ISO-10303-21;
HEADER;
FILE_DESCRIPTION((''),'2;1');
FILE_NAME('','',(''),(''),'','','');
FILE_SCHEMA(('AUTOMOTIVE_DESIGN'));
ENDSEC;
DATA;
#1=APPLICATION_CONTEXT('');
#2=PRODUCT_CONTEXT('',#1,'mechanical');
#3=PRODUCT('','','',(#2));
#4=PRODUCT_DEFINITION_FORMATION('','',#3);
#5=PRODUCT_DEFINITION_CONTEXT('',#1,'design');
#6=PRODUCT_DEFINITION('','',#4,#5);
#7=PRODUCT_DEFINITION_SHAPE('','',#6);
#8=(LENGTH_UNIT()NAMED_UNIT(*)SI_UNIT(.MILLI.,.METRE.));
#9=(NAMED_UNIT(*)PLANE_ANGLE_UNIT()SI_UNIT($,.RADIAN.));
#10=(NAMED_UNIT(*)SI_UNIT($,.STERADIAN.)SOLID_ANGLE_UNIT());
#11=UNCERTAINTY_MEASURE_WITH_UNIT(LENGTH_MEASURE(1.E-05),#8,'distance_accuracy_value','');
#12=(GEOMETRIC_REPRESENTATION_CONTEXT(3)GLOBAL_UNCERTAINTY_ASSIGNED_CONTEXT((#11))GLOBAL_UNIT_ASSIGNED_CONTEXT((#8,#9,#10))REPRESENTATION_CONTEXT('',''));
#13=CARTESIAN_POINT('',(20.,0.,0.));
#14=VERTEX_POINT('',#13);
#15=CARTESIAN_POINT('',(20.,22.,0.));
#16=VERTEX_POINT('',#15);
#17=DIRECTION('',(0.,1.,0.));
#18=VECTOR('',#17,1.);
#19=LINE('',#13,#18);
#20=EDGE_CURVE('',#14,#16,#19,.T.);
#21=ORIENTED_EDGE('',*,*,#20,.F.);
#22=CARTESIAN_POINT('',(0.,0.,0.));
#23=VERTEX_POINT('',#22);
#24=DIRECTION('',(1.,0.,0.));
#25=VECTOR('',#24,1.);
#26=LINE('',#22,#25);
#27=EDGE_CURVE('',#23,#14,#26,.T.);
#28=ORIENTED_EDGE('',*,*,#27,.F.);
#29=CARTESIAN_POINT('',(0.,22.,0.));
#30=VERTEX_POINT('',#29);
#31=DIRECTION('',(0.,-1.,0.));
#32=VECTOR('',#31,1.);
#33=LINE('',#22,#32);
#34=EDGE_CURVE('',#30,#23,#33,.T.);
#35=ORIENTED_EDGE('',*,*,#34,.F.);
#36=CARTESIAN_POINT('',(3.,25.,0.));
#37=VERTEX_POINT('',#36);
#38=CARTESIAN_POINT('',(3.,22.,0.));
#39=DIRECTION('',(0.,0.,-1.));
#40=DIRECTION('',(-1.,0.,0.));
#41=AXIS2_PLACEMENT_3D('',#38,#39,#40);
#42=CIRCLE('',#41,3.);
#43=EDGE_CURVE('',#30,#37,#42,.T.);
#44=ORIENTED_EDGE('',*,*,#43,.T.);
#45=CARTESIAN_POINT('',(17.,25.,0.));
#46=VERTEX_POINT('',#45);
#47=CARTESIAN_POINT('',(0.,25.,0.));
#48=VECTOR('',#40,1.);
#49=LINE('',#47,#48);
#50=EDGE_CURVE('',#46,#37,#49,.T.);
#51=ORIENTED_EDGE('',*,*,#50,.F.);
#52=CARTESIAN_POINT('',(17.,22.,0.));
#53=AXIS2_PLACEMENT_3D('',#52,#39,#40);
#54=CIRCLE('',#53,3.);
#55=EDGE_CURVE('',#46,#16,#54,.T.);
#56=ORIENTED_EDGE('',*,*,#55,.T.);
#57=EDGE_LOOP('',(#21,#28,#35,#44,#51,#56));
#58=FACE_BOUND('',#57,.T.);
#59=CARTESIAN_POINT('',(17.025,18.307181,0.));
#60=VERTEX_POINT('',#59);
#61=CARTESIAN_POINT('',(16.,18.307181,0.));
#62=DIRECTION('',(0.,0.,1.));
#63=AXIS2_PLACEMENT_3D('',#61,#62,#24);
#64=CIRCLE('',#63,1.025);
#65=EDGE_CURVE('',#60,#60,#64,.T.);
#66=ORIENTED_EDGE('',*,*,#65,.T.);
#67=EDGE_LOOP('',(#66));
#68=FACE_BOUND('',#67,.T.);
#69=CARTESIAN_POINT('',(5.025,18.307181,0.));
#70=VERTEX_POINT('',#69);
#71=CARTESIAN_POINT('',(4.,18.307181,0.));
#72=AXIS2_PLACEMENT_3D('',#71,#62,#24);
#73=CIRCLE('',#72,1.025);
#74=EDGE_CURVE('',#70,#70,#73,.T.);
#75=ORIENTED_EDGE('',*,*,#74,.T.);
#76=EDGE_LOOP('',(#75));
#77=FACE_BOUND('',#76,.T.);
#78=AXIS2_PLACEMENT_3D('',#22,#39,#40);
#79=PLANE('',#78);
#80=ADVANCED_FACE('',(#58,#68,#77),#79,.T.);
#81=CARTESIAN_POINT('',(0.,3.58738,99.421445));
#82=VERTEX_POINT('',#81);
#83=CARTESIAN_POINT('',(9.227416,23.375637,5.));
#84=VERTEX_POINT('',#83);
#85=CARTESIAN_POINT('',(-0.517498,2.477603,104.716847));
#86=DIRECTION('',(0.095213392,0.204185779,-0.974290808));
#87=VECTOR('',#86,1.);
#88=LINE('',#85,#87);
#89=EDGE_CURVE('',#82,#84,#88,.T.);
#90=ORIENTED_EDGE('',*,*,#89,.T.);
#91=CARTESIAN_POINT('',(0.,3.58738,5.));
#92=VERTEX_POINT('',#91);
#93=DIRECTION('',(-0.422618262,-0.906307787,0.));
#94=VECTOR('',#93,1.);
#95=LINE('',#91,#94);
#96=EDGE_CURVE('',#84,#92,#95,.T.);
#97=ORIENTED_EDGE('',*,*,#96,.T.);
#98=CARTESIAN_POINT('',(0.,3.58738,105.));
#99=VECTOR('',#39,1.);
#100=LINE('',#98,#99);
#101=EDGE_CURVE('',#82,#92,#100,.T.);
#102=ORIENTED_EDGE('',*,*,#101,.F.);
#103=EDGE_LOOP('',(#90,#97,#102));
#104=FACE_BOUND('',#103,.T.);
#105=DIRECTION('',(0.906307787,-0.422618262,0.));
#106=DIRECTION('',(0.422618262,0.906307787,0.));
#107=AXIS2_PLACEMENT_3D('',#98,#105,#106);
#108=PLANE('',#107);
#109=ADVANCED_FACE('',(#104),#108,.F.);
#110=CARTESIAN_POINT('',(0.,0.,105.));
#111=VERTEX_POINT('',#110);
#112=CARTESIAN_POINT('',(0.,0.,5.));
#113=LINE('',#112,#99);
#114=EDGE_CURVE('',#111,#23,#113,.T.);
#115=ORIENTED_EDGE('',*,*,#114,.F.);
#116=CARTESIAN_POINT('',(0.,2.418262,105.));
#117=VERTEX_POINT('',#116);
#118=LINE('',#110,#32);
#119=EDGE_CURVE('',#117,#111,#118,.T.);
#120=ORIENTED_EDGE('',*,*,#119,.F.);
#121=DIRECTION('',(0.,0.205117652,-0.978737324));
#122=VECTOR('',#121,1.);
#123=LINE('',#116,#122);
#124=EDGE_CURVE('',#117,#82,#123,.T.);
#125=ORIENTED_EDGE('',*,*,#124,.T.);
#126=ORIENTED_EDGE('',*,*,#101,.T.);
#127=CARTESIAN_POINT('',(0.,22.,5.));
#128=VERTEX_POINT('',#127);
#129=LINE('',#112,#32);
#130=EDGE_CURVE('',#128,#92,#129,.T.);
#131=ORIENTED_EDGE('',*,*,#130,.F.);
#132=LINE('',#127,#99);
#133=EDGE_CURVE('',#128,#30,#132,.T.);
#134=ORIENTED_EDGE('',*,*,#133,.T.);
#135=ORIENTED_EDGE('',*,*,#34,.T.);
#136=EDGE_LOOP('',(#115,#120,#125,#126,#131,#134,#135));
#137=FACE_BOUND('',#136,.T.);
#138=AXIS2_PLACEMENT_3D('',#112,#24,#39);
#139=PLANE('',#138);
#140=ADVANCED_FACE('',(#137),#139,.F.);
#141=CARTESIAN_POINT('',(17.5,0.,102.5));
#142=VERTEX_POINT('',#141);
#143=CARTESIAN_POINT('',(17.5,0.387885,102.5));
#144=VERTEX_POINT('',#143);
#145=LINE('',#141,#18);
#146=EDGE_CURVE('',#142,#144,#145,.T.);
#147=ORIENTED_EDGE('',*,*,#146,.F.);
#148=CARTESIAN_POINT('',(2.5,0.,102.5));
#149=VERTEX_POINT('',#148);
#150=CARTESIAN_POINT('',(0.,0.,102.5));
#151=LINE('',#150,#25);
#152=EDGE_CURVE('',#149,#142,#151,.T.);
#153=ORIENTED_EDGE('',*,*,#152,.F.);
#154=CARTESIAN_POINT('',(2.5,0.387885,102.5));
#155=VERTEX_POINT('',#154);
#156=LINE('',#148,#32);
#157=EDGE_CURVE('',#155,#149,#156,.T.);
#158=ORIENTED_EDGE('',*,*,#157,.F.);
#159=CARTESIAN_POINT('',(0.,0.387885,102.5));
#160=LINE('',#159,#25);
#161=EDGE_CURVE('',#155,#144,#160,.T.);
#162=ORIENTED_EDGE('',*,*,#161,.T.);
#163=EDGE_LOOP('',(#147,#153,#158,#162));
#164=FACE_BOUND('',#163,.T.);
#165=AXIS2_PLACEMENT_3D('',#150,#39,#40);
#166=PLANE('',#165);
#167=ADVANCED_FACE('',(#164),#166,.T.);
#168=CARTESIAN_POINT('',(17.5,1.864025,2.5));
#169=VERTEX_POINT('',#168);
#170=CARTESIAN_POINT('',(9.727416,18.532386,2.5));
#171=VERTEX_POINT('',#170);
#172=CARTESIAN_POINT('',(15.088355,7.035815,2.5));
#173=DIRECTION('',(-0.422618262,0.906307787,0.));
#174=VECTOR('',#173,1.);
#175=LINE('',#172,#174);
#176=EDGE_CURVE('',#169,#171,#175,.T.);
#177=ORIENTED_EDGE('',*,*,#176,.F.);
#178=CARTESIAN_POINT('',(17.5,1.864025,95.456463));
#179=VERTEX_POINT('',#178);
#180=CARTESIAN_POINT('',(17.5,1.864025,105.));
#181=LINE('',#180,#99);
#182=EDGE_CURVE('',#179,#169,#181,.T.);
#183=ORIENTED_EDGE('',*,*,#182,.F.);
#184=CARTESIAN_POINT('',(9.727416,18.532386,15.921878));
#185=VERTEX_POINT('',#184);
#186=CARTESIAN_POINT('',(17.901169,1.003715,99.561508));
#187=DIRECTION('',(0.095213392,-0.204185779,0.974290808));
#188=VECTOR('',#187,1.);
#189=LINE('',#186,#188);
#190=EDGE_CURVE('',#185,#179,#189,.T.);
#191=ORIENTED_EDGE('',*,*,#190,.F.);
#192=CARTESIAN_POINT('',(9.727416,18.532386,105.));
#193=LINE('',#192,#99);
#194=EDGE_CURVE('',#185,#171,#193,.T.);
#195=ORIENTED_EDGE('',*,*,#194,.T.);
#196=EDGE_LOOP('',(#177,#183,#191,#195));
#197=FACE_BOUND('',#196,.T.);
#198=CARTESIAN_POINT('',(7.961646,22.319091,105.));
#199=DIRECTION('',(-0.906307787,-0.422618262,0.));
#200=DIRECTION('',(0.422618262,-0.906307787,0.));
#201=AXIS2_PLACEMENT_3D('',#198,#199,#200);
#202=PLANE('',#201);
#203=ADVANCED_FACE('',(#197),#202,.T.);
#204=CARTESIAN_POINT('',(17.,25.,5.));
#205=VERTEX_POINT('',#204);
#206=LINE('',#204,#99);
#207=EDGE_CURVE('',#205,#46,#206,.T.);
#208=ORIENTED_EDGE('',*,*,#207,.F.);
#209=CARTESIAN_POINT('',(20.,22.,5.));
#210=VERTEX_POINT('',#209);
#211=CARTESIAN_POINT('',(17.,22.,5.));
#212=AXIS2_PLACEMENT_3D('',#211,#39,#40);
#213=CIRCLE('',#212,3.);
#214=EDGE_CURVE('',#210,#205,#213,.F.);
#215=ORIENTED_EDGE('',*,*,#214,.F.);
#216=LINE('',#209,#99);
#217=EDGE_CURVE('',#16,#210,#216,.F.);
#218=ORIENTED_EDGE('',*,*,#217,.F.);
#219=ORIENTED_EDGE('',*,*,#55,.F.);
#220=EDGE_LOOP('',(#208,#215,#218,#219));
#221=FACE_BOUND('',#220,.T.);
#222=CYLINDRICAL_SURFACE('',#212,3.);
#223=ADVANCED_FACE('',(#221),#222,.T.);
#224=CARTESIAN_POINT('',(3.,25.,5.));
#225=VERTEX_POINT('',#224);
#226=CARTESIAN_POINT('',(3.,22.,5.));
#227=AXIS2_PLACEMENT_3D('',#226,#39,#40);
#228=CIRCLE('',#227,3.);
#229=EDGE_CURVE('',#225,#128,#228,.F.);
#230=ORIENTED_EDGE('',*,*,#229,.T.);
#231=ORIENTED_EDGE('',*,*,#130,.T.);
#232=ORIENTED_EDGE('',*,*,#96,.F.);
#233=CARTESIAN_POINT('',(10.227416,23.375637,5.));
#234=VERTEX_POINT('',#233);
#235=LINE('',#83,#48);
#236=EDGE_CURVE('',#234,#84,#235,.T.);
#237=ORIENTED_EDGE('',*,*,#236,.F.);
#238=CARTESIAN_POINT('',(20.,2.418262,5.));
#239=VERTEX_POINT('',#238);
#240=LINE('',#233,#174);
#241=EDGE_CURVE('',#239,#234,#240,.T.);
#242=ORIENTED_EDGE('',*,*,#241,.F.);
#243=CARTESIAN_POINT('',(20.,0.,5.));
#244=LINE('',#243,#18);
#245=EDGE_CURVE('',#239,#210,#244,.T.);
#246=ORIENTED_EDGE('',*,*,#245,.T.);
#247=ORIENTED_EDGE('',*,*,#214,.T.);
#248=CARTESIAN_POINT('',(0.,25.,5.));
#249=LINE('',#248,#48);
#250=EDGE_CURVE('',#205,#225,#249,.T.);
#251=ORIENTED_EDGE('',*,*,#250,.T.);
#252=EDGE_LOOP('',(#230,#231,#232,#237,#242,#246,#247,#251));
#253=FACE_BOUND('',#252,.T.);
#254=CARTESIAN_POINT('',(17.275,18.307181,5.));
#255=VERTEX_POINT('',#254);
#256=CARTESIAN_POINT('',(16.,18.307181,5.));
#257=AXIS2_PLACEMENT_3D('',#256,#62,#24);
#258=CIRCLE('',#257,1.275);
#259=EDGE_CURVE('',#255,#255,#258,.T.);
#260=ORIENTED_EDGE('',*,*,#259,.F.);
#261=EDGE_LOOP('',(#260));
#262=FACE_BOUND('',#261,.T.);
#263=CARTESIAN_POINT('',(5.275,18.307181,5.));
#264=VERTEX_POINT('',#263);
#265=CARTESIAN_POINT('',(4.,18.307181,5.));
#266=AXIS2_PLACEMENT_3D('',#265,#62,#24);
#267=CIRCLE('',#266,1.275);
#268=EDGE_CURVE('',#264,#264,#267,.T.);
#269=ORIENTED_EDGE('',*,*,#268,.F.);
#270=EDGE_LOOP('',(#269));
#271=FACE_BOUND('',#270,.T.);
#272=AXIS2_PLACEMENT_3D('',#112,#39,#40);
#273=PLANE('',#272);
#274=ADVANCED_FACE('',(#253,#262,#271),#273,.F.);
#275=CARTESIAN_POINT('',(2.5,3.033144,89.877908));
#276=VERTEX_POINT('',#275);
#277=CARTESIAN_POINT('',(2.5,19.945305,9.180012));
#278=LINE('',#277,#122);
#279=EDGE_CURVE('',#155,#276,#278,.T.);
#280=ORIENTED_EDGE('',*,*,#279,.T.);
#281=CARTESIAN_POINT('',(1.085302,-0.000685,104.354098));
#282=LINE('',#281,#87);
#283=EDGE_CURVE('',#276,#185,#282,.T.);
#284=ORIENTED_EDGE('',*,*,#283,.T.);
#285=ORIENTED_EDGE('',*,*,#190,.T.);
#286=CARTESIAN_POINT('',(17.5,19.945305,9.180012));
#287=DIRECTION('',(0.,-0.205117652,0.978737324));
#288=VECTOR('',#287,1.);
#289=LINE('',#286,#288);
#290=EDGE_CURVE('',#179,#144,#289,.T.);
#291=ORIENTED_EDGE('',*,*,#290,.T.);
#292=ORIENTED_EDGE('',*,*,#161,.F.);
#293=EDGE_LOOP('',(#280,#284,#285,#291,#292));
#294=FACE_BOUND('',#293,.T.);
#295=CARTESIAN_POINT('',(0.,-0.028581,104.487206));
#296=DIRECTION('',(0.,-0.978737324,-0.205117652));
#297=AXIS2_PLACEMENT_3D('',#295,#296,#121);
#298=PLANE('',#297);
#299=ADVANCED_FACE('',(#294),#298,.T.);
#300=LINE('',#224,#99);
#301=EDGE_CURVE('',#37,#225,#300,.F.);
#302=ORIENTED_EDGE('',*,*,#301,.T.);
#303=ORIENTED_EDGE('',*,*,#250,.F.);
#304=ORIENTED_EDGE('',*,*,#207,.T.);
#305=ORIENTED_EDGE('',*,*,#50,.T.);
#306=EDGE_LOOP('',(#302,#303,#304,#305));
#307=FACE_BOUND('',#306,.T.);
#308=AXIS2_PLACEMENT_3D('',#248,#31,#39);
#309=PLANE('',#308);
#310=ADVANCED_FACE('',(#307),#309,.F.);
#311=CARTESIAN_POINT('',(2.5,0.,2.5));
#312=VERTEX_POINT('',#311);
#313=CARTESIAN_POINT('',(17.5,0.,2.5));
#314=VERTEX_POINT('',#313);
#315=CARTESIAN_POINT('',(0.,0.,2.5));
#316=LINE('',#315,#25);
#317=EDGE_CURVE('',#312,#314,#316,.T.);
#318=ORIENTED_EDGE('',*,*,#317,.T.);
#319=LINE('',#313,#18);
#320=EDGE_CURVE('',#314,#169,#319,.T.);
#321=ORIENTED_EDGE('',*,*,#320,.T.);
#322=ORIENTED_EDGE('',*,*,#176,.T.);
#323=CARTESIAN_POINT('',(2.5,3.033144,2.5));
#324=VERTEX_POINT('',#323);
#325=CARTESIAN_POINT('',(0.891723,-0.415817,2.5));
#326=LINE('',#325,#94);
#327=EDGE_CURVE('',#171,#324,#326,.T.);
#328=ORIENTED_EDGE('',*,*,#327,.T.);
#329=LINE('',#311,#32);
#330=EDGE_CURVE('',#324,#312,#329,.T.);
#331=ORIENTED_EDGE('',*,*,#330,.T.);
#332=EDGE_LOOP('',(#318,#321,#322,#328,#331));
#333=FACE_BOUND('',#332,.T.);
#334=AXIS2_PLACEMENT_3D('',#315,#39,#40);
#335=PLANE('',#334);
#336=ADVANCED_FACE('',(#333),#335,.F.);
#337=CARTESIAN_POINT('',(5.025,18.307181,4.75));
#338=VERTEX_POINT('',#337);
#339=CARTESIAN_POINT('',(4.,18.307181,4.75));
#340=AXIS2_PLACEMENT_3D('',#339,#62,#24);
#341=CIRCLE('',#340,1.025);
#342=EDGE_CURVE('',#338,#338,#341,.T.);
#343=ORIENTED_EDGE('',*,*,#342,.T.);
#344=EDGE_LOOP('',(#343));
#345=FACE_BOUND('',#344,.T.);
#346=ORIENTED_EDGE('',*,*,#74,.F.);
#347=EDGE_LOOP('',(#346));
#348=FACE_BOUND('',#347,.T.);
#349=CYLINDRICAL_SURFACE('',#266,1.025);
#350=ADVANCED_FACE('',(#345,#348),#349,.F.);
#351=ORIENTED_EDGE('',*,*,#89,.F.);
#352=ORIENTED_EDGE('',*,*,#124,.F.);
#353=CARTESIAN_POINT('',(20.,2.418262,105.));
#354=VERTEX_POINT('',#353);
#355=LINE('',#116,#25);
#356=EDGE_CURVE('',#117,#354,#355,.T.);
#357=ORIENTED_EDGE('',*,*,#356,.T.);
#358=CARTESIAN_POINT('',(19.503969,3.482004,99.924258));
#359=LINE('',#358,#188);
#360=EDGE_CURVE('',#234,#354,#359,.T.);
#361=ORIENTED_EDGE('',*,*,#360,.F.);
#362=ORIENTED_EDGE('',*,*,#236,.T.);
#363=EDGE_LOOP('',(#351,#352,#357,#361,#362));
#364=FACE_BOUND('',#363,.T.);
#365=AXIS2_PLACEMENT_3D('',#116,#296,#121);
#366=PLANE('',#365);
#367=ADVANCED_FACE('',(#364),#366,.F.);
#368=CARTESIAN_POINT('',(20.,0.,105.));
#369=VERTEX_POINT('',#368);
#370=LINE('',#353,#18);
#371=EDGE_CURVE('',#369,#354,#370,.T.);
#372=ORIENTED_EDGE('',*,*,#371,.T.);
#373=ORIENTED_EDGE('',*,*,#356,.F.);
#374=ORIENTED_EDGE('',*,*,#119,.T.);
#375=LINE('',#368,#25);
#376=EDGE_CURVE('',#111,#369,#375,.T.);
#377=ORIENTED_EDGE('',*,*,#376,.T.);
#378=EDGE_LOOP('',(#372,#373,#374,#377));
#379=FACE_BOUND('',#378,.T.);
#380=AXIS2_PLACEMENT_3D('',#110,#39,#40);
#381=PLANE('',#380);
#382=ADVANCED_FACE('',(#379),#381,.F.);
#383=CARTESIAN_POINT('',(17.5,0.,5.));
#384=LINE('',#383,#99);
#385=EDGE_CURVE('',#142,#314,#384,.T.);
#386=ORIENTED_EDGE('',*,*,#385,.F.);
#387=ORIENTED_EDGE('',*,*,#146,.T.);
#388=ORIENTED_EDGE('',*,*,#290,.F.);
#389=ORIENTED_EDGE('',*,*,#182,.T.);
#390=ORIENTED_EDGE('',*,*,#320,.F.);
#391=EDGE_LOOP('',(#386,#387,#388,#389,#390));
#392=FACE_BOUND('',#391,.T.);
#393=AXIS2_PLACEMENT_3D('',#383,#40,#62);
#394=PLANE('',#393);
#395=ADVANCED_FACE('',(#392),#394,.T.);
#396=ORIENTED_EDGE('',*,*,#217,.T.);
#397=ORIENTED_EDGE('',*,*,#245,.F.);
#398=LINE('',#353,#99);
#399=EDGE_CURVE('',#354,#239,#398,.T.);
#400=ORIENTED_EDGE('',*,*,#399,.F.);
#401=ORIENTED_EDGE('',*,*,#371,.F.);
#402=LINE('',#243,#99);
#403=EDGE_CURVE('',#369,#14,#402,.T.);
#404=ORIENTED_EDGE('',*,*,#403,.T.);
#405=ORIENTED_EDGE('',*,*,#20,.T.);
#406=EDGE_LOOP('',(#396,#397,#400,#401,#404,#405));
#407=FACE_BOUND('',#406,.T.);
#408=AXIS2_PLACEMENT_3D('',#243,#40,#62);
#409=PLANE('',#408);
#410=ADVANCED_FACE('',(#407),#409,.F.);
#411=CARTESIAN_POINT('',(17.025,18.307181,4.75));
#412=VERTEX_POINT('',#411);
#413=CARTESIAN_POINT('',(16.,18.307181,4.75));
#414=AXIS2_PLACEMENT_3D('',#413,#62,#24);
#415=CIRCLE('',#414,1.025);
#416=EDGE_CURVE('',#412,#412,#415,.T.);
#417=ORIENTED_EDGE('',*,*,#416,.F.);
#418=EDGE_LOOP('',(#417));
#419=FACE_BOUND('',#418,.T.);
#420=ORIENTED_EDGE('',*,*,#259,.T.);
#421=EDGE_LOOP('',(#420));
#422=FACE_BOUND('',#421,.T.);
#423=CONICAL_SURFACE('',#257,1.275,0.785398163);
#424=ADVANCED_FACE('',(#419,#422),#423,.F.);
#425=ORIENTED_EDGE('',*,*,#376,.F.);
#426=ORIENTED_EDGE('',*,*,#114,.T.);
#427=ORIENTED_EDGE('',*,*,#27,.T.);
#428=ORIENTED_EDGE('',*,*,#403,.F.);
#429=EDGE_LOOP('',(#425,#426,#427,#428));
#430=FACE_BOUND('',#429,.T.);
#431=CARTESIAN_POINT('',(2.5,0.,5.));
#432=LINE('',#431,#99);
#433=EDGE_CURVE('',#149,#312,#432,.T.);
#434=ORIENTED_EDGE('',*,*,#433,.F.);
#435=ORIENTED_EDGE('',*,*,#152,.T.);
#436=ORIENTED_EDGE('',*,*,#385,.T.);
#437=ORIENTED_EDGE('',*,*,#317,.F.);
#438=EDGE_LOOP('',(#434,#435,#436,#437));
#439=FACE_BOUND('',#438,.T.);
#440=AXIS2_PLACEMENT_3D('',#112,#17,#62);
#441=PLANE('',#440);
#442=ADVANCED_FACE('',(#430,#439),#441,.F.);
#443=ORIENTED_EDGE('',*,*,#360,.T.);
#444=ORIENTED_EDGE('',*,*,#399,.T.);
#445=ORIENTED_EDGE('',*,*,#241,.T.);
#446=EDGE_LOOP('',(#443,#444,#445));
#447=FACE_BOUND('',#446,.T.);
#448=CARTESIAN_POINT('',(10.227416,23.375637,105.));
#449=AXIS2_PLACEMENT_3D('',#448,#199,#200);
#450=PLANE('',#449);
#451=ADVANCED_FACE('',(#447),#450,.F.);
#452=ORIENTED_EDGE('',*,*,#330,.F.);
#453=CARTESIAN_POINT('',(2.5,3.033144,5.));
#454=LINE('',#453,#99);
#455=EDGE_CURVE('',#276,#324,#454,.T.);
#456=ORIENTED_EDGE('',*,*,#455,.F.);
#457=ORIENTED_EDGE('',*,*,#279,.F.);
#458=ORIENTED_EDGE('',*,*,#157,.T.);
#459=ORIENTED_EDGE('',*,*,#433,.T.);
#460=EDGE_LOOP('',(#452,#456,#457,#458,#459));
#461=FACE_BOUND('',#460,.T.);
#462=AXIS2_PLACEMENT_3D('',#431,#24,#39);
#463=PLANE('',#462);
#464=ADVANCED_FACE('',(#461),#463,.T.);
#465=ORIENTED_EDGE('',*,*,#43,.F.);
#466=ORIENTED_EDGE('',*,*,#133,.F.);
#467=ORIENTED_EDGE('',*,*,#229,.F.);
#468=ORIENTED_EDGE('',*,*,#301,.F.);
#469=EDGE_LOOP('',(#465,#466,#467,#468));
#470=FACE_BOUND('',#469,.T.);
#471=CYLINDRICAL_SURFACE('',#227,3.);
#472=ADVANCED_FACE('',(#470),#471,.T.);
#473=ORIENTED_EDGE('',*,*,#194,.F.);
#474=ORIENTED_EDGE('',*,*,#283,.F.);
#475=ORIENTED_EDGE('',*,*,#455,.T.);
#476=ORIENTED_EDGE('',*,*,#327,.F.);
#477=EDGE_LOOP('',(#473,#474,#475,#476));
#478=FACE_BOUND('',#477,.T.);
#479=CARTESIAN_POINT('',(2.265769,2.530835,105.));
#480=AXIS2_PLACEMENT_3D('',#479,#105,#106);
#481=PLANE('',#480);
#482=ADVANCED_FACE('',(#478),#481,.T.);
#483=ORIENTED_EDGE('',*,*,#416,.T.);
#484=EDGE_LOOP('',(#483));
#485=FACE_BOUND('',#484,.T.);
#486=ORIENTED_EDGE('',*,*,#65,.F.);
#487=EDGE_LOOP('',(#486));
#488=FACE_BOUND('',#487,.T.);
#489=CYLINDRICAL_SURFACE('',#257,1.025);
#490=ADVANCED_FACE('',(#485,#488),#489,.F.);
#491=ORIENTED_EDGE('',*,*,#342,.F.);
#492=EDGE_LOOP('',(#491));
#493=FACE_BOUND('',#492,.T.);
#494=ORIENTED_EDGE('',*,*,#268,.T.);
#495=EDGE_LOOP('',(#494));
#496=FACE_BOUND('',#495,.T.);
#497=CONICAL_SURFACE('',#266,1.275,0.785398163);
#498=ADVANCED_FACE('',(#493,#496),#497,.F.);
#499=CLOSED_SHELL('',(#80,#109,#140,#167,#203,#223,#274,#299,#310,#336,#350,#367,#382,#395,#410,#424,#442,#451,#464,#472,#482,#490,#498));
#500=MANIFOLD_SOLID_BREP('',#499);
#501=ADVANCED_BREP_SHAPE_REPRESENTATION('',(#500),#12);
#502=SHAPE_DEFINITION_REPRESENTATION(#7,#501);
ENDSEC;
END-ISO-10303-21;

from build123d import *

# Parameters (mm, degrees)
SKETCH1_W                          = 20
SKETCH1_H                          = 25
BOSS_EXTRUDE1_DEPTH                = 5
BOSS_EXTRUDE3_DEPTH                = 100
CUT_EXTRUDE2_DEPTH                 = 110.772492001
FILLET1_R                          = 3
SHELL1_START                       = 2.5
SHELL1_DEPTH                       = 13.421878312
SHELL1_START_2                     = 15.921878312
SHELL1_2_DEPTH                     = 86.578121688
SHELL1_START_3                     = 21.404196581
SHELL1_3_DEPTH                     = 2.5
M2_5X0_45_TAPPED_HOLE2_D           = 2.05
M2_5X0_45_TAPPED_HOLE2_CSINK_D     = 2.55
M2_5X0_45_TAPPED_HOLE2_CSINK_ANGLE = 90


with BuildPart() as part:
    # Sketch1 → Boss-Extrude1 (new body)
    with BuildSketch(Plane.XY):
        with Locations((10, 12.5)):
            Rectangle(SKETCH1_W, SKETCH1_H)
    extrude(amount=BOSS_EXTRUDE1_DEPTH)

    # Sketch2 → Boss-Extrude3 (add)
    with BuildSketch(Plane.XY.offset(5)):
        Polygon((0, 0), (0, 3.587380473), (9.227415524, 23.375636922), (10.227415524, 23.375636922), (20, 2.418261881), (20, 0), align=None)
    extrude(amount=BOSS_EXTRUDE3_DEPTH)

    # Sketch3 → Cut-Extrude2 (cut, through all)
    with BuildSketch(Plane(origin=(20, 0, 0), x_dir=(0, 0, -1), z_dir=(1, 0, 0))):
        Polygon((-105, 2.418261881), (-5, 23.375636922), (-105, 23.375636922), align=None)
    extrude(amount=-CUT_EXTRUDE2_DEPTH, mode=Mode.SUBTRACT)

    # Fillet1
    fillet1_edges = [part.edges().sort_by_distance(p)[0] for p in [
        (0, 25, 2.5),
        (20, 25, 2.5),
    ]]
    fillet(fillet1_edges, radius=FILLET1_R)

    # Shell1: read off the stored shape, not the designer's step
    # Shell1 outline → Shell1 (cut)
    with BuildSketch(Plane.XY.offset(SHELL1_START)):
        Polygon((2.5, 3.033143816), (2.5, 0), (17.5, 0), (17.5, 1.864025225), (9.727415524, 18.532386424), align=None)
    extrude(amount=SHELL1_DEPTH, mode=Mode.SUBTRACT)

    # Shell1 2 outline → Shell1 2 (cut)
    with BuildSketch(Plane.XY.offset(SHELL1_START_2)):
        Polygon((2.5, 3.033143816), (2.5, 0), (17.5, 0), (17.5, 1.864025225), (9.727415524, 18.532386424), align=None)
    extrude(amount=SHELL1_2_DEPTH, mode=Mode.SUBTRACT)

    # Shell1 3 outline → Shell1 3 (add)
    with BuildSketch(Plane(origin=(0, 0, 0), x_dir=(1, 0, 0), z_dir=(0, 0.9787373237991824, 0.2051176516110071)).offset(SHELL1_START_3)):
        Polygon((17.5, -93.044458657), (9.727415524, -11.782016987), (2.5, -87.344712281), (2.5, -100.241013679), (17.5, -100.241013679), align=None)
    extrude(amount=SHELL1_3_DEPTH)

    # M2.5x0.45 Tapped Hole2 (through all)
    with Locations(Plane.XY.offset(5)):
        with Locations((16, 18.307180682), (4, 18.307180682)):
            CounterSinkHole(M2_5X0_45_TAPPED_HOLE2_D / 2, M2_5X0_45_TAPPED_HOLE2_CSINK_D / 2, counter_sink_angle=M2_5X0_45_TAPPED_HOLE2_CSINK_ANGLE)


solid = part.part
